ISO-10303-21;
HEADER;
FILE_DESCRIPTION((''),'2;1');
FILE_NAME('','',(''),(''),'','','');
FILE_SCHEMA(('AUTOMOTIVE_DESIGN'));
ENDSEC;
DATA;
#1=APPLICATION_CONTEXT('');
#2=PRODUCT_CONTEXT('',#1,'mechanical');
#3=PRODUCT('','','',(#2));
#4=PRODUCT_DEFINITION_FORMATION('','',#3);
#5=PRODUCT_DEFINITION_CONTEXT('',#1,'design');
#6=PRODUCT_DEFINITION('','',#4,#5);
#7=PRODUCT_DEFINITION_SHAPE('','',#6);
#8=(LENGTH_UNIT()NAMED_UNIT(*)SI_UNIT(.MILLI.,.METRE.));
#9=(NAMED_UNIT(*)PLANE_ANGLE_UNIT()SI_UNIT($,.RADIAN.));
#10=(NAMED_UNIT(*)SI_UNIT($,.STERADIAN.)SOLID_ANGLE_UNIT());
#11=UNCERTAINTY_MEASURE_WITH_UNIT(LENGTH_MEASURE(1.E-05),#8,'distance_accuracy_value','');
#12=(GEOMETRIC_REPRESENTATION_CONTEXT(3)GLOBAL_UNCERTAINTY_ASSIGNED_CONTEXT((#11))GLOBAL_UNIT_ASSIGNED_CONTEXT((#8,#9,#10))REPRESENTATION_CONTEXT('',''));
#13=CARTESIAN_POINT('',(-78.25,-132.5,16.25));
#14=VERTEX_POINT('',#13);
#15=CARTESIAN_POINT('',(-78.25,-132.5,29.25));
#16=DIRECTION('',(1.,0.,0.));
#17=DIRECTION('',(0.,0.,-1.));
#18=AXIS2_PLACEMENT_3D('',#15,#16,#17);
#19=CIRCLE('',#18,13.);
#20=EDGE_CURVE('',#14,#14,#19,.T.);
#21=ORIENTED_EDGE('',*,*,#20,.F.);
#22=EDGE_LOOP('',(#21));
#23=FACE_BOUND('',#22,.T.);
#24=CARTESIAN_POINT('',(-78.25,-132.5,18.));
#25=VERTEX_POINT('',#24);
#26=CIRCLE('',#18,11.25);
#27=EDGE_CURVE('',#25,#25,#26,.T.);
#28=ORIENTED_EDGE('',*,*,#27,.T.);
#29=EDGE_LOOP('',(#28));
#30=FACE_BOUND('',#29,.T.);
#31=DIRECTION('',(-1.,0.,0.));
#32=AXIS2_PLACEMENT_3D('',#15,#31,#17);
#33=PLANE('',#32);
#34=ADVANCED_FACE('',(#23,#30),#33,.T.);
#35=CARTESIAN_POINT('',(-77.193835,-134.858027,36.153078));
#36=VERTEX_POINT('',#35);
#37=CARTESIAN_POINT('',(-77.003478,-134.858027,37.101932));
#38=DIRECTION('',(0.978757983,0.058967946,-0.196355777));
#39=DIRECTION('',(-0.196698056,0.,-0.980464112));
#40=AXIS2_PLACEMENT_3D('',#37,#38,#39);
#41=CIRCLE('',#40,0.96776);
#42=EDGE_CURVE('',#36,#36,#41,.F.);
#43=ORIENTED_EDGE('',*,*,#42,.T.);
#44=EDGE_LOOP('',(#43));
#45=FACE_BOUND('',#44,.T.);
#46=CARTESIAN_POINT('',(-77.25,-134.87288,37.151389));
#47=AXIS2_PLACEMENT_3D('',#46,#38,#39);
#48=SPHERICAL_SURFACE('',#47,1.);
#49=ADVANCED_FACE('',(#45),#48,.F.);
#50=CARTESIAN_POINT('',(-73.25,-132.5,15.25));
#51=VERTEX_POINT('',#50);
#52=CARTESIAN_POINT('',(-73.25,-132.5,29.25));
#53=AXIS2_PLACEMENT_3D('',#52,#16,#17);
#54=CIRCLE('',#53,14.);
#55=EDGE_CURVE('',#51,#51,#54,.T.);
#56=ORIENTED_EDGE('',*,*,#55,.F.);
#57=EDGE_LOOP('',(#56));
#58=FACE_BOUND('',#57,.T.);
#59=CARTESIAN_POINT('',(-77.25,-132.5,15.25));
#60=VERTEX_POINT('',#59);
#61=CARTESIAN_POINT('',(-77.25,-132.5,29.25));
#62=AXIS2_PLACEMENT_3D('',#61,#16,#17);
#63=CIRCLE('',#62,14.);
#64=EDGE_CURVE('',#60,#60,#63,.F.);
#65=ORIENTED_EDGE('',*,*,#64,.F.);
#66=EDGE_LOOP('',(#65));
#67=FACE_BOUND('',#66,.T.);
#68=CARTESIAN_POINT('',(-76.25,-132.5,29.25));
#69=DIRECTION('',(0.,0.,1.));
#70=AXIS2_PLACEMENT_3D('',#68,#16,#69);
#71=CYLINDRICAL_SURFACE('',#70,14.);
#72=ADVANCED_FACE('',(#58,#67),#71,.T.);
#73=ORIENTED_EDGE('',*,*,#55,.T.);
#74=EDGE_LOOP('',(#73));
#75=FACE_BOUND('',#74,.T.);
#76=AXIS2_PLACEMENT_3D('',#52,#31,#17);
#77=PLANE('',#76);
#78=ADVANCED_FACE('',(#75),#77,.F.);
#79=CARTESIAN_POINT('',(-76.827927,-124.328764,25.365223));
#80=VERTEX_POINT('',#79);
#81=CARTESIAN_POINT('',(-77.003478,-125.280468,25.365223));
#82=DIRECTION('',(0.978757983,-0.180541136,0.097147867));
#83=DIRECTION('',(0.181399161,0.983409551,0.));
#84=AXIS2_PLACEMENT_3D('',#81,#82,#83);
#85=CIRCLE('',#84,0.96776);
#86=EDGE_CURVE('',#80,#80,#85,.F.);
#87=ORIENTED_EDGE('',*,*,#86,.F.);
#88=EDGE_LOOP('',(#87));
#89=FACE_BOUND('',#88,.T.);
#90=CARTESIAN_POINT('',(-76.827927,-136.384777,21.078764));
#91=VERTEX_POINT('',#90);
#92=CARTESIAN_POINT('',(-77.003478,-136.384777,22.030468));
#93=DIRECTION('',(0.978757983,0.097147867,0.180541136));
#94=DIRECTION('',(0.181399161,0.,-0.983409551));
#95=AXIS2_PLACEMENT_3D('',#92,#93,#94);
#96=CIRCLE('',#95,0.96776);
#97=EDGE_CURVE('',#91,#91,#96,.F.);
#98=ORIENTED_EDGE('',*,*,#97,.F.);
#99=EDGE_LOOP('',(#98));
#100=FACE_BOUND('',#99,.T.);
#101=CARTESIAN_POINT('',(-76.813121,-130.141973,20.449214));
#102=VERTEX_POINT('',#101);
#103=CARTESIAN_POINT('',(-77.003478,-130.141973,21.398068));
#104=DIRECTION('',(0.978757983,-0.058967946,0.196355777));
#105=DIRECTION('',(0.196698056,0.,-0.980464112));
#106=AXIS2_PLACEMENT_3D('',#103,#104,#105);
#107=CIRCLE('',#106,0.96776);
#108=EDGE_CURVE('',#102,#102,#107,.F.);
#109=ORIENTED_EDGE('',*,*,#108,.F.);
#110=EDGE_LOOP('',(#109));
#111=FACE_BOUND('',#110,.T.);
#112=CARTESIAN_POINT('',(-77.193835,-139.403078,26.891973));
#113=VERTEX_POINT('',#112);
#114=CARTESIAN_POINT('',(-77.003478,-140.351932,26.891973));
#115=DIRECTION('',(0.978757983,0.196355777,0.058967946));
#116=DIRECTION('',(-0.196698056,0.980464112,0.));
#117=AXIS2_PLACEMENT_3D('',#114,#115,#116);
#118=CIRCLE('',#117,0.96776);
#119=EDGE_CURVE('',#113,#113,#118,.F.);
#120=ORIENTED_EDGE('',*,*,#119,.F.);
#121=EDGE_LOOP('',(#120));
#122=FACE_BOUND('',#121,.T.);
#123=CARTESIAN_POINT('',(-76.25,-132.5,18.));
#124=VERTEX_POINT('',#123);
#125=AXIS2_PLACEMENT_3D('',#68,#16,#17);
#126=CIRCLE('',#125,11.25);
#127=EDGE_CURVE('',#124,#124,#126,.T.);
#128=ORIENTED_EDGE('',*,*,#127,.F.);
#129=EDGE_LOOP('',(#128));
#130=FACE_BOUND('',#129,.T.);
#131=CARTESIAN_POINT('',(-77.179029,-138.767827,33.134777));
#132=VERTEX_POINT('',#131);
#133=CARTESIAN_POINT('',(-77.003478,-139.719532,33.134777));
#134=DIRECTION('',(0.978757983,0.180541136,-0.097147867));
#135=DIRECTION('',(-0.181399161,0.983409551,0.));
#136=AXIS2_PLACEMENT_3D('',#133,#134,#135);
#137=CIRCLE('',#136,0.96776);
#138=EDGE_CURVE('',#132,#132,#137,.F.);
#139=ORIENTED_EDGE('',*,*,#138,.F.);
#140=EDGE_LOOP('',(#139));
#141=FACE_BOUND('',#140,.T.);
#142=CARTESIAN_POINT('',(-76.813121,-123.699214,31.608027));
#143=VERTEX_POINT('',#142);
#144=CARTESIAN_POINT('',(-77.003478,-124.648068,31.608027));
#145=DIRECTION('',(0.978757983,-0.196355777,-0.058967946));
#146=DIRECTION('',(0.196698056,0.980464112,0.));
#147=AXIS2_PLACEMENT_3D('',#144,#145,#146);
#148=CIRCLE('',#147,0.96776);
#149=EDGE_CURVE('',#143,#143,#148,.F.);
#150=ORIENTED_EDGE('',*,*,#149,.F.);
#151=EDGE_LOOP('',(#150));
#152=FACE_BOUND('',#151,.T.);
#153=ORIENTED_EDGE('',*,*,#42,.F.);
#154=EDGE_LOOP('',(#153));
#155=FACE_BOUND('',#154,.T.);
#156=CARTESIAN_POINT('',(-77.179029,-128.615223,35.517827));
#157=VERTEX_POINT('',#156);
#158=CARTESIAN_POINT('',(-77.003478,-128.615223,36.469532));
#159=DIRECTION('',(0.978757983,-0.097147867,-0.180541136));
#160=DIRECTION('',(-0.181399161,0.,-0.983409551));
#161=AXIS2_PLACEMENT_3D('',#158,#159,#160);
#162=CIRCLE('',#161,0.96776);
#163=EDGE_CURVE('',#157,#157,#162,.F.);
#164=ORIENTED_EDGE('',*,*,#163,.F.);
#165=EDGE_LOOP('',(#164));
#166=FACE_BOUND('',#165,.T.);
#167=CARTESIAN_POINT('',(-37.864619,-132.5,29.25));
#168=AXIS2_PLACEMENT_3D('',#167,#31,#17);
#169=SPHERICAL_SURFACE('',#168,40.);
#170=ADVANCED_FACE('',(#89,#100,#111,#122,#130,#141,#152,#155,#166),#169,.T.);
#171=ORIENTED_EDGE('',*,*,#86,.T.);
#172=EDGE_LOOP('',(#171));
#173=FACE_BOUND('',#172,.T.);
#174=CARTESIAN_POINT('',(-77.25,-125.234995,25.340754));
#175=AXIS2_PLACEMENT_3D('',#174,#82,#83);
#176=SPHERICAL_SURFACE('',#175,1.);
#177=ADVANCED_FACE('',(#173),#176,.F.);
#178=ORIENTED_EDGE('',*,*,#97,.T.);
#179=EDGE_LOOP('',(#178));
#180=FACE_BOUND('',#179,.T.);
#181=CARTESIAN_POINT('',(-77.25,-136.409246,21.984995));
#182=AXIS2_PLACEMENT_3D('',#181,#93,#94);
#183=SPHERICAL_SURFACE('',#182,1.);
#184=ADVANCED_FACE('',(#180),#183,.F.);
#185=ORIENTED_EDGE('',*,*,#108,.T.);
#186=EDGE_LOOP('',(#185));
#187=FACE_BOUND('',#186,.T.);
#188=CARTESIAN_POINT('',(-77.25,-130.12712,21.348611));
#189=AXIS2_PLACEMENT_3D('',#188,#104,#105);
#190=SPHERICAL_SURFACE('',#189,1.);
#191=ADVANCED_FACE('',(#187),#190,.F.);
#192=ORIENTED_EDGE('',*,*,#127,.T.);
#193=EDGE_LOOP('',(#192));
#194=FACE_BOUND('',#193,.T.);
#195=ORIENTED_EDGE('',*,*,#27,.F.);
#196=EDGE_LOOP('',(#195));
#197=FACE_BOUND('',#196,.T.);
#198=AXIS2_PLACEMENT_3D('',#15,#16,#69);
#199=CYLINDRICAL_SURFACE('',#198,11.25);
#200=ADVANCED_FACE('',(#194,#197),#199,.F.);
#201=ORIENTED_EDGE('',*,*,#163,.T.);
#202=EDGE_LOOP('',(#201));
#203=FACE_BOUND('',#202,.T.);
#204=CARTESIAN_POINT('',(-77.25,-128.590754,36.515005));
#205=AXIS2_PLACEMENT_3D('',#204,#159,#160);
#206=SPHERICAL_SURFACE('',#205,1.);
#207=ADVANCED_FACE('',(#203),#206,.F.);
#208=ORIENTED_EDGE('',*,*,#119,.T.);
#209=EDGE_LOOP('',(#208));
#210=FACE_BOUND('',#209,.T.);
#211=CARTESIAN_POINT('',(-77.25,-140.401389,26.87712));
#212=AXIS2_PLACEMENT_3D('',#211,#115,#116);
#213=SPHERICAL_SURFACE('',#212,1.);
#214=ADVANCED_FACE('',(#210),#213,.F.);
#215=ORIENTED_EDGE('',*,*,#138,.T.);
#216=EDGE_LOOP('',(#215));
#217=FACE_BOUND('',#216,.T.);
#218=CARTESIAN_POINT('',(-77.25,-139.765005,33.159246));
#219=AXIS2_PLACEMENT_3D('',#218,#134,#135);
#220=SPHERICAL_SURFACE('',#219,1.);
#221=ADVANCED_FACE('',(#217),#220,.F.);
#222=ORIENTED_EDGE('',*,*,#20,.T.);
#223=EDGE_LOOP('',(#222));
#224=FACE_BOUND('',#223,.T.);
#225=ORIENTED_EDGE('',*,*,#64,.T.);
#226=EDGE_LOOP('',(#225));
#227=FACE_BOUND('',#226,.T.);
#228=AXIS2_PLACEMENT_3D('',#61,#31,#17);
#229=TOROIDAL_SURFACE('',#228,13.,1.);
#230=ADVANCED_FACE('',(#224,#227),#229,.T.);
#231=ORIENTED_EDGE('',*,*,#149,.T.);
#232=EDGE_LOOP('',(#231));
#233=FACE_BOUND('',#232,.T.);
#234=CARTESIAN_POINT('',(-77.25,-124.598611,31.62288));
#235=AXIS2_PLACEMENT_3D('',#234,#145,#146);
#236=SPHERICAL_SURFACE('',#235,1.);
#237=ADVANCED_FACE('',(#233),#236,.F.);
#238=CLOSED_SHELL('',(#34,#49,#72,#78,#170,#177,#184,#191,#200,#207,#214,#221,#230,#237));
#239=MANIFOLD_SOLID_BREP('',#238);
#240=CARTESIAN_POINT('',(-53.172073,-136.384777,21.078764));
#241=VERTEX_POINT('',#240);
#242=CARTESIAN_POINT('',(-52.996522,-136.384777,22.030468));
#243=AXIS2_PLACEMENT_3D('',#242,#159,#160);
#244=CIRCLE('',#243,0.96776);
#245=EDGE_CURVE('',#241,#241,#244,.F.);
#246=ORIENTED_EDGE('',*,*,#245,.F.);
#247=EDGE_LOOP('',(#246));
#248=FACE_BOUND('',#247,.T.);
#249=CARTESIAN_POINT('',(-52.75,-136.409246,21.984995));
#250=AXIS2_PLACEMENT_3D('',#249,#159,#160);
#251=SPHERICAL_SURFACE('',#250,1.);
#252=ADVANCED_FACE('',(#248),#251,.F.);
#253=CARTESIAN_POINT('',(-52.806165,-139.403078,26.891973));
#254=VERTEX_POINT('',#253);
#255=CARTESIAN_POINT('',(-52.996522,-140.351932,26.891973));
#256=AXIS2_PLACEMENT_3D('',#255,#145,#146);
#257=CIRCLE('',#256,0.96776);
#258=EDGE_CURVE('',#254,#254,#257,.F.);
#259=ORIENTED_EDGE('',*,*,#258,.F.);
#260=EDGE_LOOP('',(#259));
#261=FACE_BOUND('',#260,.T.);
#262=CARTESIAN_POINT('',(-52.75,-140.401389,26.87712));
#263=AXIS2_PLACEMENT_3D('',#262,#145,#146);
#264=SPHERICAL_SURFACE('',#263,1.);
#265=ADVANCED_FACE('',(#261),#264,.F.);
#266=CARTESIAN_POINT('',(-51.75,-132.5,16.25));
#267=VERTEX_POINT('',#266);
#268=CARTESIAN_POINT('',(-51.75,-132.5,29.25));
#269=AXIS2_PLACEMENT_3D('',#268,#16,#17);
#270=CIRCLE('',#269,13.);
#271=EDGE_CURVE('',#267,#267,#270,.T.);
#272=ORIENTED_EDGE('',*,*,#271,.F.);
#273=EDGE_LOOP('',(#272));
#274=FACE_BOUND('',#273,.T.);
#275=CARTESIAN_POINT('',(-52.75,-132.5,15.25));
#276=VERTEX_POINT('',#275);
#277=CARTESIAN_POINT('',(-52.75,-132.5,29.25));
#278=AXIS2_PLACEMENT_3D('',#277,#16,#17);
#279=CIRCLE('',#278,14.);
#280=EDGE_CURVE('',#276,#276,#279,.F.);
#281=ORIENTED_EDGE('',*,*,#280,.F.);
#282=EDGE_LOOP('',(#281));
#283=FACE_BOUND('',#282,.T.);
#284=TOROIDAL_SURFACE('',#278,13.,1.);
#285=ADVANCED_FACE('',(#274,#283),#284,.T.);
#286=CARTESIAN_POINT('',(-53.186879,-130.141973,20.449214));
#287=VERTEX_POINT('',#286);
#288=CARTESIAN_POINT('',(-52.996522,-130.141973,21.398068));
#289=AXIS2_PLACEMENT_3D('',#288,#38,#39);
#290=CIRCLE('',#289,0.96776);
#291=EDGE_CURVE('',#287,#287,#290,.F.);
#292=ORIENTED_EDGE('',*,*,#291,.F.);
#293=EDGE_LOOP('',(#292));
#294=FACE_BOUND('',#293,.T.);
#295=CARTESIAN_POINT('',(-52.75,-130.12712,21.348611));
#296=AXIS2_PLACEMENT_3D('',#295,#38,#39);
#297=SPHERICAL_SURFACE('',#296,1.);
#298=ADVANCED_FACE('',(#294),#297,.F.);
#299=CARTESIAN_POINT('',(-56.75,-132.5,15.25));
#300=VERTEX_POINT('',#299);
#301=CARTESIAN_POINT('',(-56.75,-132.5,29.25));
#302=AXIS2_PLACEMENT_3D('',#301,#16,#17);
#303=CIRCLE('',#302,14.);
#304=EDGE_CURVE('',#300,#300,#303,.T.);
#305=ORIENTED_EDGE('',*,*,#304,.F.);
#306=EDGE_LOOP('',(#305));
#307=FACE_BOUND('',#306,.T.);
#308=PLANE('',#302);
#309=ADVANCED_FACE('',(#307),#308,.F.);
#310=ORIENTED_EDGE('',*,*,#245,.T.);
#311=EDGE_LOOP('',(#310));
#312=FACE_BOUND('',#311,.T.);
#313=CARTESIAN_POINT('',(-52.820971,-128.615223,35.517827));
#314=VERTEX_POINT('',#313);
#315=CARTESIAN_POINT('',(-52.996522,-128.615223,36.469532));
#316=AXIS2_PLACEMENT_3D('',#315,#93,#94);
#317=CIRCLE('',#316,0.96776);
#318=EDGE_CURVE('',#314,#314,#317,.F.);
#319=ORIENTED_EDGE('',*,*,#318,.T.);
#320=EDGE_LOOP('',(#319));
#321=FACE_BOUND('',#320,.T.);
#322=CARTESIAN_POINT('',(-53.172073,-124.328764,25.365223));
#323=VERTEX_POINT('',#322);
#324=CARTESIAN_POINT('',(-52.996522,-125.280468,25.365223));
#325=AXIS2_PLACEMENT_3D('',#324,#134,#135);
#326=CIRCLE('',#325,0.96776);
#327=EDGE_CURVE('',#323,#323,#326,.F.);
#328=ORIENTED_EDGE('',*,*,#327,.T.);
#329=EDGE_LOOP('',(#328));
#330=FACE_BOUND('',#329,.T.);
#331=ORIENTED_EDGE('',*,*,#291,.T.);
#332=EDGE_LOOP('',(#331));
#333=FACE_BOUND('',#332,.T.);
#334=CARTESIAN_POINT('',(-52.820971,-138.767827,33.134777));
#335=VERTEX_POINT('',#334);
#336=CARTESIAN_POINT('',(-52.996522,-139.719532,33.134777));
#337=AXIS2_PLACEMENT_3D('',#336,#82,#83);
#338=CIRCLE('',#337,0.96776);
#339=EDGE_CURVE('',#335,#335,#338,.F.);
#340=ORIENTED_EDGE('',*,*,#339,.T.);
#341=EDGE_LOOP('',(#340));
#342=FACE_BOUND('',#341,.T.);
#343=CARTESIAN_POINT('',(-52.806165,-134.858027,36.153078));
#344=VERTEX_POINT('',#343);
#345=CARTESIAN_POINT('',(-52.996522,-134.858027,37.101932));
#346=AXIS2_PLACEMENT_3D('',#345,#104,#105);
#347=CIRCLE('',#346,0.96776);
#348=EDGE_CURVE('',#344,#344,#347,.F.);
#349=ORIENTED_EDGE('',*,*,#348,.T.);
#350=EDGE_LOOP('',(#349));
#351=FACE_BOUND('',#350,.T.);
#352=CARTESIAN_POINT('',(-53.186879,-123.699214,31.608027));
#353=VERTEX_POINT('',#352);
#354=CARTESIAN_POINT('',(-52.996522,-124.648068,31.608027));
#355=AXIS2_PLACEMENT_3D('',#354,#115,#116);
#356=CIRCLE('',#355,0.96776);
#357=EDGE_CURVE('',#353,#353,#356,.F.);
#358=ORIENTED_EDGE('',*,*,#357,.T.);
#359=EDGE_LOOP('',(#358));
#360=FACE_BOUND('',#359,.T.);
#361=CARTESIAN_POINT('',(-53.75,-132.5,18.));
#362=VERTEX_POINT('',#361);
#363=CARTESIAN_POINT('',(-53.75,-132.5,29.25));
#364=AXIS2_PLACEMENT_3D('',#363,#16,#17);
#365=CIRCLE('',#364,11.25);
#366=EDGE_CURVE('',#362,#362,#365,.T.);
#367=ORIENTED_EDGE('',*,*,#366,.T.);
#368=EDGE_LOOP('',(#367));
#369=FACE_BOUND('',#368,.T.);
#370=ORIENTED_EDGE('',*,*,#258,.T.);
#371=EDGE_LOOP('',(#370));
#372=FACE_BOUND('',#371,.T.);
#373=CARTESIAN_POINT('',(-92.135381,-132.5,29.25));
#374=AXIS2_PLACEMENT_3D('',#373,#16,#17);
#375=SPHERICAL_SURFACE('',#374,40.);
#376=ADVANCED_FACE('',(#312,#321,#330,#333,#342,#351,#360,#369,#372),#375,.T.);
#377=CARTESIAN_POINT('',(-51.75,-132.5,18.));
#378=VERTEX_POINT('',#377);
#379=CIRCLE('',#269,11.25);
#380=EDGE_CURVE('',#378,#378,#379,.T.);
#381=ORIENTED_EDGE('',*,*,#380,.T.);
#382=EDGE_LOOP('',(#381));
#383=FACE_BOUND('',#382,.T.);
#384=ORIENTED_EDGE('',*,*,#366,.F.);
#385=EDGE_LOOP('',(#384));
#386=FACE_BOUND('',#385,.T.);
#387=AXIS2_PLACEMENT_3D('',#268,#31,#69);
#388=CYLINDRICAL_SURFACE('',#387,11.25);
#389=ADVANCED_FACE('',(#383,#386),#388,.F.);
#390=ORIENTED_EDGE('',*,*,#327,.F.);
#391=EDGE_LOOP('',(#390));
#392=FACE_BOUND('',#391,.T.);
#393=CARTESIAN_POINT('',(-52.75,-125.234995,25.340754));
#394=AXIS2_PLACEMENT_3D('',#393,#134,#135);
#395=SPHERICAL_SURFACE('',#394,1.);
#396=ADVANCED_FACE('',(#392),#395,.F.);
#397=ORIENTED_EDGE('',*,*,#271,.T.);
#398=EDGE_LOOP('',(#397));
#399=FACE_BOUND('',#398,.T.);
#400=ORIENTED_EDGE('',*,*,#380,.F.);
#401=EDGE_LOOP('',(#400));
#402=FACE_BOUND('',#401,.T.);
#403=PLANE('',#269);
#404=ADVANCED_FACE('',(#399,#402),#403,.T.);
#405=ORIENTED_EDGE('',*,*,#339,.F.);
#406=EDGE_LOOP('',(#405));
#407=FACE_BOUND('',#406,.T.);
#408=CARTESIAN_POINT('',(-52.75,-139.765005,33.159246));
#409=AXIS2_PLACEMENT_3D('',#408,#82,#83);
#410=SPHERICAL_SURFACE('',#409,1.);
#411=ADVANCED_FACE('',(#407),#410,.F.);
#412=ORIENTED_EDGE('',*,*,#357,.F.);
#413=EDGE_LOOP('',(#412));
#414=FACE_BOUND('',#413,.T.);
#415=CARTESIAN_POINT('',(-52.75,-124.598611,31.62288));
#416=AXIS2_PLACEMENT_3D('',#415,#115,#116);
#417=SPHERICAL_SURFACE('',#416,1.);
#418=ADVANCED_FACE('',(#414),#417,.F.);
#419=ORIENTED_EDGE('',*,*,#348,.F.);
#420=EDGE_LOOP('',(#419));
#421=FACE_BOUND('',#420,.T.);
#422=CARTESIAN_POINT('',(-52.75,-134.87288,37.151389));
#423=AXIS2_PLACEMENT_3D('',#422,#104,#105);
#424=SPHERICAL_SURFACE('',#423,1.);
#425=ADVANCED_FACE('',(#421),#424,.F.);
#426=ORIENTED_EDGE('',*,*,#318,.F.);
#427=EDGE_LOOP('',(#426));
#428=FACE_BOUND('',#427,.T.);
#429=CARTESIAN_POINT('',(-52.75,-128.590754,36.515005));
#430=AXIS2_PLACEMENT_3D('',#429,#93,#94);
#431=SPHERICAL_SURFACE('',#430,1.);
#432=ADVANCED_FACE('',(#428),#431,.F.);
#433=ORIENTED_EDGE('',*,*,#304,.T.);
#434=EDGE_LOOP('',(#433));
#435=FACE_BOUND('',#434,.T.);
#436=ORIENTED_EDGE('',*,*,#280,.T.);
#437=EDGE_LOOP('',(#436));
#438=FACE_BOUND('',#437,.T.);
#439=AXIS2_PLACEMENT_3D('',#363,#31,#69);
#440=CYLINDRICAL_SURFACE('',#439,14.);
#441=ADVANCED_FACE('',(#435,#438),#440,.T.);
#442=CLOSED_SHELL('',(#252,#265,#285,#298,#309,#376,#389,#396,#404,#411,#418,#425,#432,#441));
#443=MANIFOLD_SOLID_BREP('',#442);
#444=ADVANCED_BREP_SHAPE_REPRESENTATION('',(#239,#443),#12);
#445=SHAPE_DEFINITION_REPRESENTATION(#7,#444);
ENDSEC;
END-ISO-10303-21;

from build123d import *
from build123d.topology import SkipClean

# Parameters (mm, degrees)
SKETCH_1_R               = 14
EXTRUDE_1_DEPTH          = 1.5
EXTRUDE_START            = 2
SKETCH_2_R               = 14
SKETCH_2_R_2             = 11.25
EXTRUDE_2_DEPTH          = 2
PATTERN_CIRCULAR_2_COUNT = 8
FILLET_1_R               = 1


with BuildPart() as part:
    # 草图1 → 凸台-拉伸1 (new, symmetric)
    with BuildSketch(Plane(origin=(-55.25, 0, 0), x_dir=(0, 0, -1), z_dir=(1, 0, 0))):
        with Locations((-29.25, -132.5)):
            Circle(SKETCH_1_R)
    extrude(amount=EXTRUDE_1_DEPTH, both=True)

    # 草图2 → 凸台-拉伸2 (add)
    with BuildSketch(Plane(origin=(-53.75, 0, 0), x_dir=(0, 0, -1), z_dir=(1, 0, 0)).offset(EXTRUDE_START)):
        with Locations((-29.25, -132.5)):
            Circle(SKETCH_2_R)
        with Locations((-29.25, -132.5)):
            Circle(SKETCH_2_R_2, mode=Mode.SUBTRACT)
    extrude(amount=-EXTRUDE_2_DEPTH)

    # 草图3 → 旋转1 (revolve)
    with SkipClean():  # the faces are left unmerged after this step: merging them gives an invalid solid
        with BuildSketch(Plane(origin=(0, -132.5, 0), x_dir=(1, 0, 0), z_dir=(0, 1, 0)), mode=Mode.PRIVATE) as revolve_1_sk:
            with BuildLine():
                Line((-53.75, -29.25), (-53.75, -40.5))
                ThreePointArc((-53.75, -40.5), (-52.541093529, -34.932637888), (-52.135381332, -29.25))
                Line((-52.135381332, -29.25), (-53.75, -29.25))
            make_face()
            with BuildLine():
                Line((-53.75, -18), (-53.75, -29.25))
                Line((-53.75, -29.25), (-52.135381332, -29.25))
                ThreePointArc((-52.135381332, -29.25), (-52.541093529, -23.567362112), (-53.75, -18))
            make_face()
        revolve(revolve_1_sk.sketch.rotate(Axis((-52.135381332, -132.5, 29.25), (-1, 0, 0)), 180), axis=Axis((-52.135381332, -132.5, 29.25), (-1, 0, 0)))
    add(part.part.scale(1), mode=Mode.REPLACE)  # the faces are merged on a copy


with BuildPart() as body_2:
    # 草图4 → 旋转2 (revolve)
    with SkipClean():  # the faces are left unmerged after this step: merging them gives an invalid solid
        with BuildSketch(Plane(origin=(-51.75, 0, 0), x_dir=(0, 0, -1), z_dir=(1, 0, 0)), mode=Mode.PRIVATE) as revolve_2_sk:
            with BuildLine():
                ThreePointArc((-24.866905933, -124.354388519), (-26.221360587, -124.761147158), (-25.814601947, -126.115601812))
                Line((-25.814601947, -126.115601812), (-24.866905933, -124.354388519))
            make_face()
            with BuildLine():
                Line((-24.866905933, -124.354388519), (-25.814601947, -126.115601812))
                ThreePointArc((-25.814601947, -126.115601812), (-24.827844595, -126.093437944), (-24.34075394, -125.234995166))
                ThreePointArc((-24.34075394, -125.234995166), (-24.482311162, -124.722085821), (-24.866905933, -124.354388519))
            make_face()
        revolve(revolve_2_sk.sketch.rotate(Axis((-51.75, -132.5, 29.25), (0, 0.8806066465842294, -0.473848007267814)), 180), axis=Axis((-51.75, -132.5, 29.25), (0, 0.8806066465842294, -0.473848007267814)))
    add(body_2.part.scale(1), mode=Mode.REPLACE)  # the faces are merged on a copy


with BuildPart() as body_2_1:
    # Move Body 2: moved
    add(body_2.part.moved(Location((-1, 0, 0))))


with BuildPart() as pattern_circular_2_1:
    # 阵列(圆周)2: pattern copy
    add(body_2_1.part.rotate(Axis((0, -132.5, 29.25), (1, 0, 0)), 1 * 360 / PATTERN_CIRCULAR_2_COUNT))


with BuildPart() as pattern_circular_2_2:
    # 阵列(圆周)2: pattern copy
    add(body_2_1.part.rotate(Axis((0, -132.5, 29.25), (1, 0, 0)), 2 * 360 / PATTERN_CIRCULAR_2_COUNT))


with BuildPart() as pattern_circular_2_3:
    # 阵列(圆周)2: pattern copy
    add(body_2_1.part.rotate(Axis((0, -132.5, 29.25), (1, 0, 0)), 3 * 360 / PATTERN_CIRCULAR_2_COUNT))


with BuildPart() as pattern_circular_2_4:
    # 阵列(圆周)2: pattern copy
    add(body_2_1.part.rotate(Axis((0, -132.5, 29.25), (1, 0, 0)), 4 * 360 / PATTERN_CIRCULAR_2_COUNT))


with BuildPart() as pattern_circular_2_5:
    # 阵列(圆周)2: pattern copy
    add(body_2_1.part.rotate(Axis((0, -132.5, 29.25), (1, 0, 0)), 5 * 360 / PATTERN_CIRCULAR_2_COUNT))


with BuildPart() as pattern_circular_2_6:
    # 阵列(圆周)2: pattern copy
    add(body_2_1.part.rotate(Axis((0, -132.5, 29.25), (1, 0, 0)), 6 * 360 / PATTERN_CIRCULAR_2_COUNT))


with BuildPart() as pattern_circular_2_7:
    # 阵列(圆周)2: pattern copy
    add(body_2_1.part.rotate(Axis((0, -132.5, 29.25), (1, 0, 0)), 7 * 360 / PATTERN_CIRCULAR_2_COUNT))


with BuildPart() as part_1:
    add(part.part)

    # Combine 2: read off the stored shape, not the designer's step
    # Combine 2: cut body 2, 阵列(圆周)2_1, 阵列(圆周)2_7, 阵列(圆周)2_6, 阵列(圆周)2_5, 阵列(圆周)2_4, 阵列(圆周)2_3, 阵列(圆周)2_2
    add(body_2_1.part, mode=Mode.SUBTRACT)
    add(pattern_circular_2_1.part, mode=Mode.SUBTRACT)
    add(pattern_circular_2_7.part, mode=Mode.SUBTRACT)
    add(pattern_circular_2_6.part, mode=Mode.SUBTRACT)
    add(pattern_circular_2_5.part, mode=Mode.SUBTRACT)
    add(pattern_circular_2_4.part, mode=Mode.SUBTRACT)
    add(pattern_circular_2_3.part, mode=Mode.SUBTRACT)
    add(pattern_circular_2_2.part, mode=Mode.SUBTRACT)

    # 圆角1
    fillet_1_edges = [part_1.edges().sort_by_distance(p)[0] for p in [
        (-51.75, -132.5, 43.25),
    ]]
    fillet(fillet_1_edges, radius=FILLET_1_R)


with BuildPart() as body_2_2:
    # 镜向1: mirrored copy
    add(part_1.part.mirror(Plane(origin=(-65, 0, 0), x_dir=(0, 0, 1), z_dir=(1, 0, 0))))


solid = Compound([part_1.part, body_2_2.part])
